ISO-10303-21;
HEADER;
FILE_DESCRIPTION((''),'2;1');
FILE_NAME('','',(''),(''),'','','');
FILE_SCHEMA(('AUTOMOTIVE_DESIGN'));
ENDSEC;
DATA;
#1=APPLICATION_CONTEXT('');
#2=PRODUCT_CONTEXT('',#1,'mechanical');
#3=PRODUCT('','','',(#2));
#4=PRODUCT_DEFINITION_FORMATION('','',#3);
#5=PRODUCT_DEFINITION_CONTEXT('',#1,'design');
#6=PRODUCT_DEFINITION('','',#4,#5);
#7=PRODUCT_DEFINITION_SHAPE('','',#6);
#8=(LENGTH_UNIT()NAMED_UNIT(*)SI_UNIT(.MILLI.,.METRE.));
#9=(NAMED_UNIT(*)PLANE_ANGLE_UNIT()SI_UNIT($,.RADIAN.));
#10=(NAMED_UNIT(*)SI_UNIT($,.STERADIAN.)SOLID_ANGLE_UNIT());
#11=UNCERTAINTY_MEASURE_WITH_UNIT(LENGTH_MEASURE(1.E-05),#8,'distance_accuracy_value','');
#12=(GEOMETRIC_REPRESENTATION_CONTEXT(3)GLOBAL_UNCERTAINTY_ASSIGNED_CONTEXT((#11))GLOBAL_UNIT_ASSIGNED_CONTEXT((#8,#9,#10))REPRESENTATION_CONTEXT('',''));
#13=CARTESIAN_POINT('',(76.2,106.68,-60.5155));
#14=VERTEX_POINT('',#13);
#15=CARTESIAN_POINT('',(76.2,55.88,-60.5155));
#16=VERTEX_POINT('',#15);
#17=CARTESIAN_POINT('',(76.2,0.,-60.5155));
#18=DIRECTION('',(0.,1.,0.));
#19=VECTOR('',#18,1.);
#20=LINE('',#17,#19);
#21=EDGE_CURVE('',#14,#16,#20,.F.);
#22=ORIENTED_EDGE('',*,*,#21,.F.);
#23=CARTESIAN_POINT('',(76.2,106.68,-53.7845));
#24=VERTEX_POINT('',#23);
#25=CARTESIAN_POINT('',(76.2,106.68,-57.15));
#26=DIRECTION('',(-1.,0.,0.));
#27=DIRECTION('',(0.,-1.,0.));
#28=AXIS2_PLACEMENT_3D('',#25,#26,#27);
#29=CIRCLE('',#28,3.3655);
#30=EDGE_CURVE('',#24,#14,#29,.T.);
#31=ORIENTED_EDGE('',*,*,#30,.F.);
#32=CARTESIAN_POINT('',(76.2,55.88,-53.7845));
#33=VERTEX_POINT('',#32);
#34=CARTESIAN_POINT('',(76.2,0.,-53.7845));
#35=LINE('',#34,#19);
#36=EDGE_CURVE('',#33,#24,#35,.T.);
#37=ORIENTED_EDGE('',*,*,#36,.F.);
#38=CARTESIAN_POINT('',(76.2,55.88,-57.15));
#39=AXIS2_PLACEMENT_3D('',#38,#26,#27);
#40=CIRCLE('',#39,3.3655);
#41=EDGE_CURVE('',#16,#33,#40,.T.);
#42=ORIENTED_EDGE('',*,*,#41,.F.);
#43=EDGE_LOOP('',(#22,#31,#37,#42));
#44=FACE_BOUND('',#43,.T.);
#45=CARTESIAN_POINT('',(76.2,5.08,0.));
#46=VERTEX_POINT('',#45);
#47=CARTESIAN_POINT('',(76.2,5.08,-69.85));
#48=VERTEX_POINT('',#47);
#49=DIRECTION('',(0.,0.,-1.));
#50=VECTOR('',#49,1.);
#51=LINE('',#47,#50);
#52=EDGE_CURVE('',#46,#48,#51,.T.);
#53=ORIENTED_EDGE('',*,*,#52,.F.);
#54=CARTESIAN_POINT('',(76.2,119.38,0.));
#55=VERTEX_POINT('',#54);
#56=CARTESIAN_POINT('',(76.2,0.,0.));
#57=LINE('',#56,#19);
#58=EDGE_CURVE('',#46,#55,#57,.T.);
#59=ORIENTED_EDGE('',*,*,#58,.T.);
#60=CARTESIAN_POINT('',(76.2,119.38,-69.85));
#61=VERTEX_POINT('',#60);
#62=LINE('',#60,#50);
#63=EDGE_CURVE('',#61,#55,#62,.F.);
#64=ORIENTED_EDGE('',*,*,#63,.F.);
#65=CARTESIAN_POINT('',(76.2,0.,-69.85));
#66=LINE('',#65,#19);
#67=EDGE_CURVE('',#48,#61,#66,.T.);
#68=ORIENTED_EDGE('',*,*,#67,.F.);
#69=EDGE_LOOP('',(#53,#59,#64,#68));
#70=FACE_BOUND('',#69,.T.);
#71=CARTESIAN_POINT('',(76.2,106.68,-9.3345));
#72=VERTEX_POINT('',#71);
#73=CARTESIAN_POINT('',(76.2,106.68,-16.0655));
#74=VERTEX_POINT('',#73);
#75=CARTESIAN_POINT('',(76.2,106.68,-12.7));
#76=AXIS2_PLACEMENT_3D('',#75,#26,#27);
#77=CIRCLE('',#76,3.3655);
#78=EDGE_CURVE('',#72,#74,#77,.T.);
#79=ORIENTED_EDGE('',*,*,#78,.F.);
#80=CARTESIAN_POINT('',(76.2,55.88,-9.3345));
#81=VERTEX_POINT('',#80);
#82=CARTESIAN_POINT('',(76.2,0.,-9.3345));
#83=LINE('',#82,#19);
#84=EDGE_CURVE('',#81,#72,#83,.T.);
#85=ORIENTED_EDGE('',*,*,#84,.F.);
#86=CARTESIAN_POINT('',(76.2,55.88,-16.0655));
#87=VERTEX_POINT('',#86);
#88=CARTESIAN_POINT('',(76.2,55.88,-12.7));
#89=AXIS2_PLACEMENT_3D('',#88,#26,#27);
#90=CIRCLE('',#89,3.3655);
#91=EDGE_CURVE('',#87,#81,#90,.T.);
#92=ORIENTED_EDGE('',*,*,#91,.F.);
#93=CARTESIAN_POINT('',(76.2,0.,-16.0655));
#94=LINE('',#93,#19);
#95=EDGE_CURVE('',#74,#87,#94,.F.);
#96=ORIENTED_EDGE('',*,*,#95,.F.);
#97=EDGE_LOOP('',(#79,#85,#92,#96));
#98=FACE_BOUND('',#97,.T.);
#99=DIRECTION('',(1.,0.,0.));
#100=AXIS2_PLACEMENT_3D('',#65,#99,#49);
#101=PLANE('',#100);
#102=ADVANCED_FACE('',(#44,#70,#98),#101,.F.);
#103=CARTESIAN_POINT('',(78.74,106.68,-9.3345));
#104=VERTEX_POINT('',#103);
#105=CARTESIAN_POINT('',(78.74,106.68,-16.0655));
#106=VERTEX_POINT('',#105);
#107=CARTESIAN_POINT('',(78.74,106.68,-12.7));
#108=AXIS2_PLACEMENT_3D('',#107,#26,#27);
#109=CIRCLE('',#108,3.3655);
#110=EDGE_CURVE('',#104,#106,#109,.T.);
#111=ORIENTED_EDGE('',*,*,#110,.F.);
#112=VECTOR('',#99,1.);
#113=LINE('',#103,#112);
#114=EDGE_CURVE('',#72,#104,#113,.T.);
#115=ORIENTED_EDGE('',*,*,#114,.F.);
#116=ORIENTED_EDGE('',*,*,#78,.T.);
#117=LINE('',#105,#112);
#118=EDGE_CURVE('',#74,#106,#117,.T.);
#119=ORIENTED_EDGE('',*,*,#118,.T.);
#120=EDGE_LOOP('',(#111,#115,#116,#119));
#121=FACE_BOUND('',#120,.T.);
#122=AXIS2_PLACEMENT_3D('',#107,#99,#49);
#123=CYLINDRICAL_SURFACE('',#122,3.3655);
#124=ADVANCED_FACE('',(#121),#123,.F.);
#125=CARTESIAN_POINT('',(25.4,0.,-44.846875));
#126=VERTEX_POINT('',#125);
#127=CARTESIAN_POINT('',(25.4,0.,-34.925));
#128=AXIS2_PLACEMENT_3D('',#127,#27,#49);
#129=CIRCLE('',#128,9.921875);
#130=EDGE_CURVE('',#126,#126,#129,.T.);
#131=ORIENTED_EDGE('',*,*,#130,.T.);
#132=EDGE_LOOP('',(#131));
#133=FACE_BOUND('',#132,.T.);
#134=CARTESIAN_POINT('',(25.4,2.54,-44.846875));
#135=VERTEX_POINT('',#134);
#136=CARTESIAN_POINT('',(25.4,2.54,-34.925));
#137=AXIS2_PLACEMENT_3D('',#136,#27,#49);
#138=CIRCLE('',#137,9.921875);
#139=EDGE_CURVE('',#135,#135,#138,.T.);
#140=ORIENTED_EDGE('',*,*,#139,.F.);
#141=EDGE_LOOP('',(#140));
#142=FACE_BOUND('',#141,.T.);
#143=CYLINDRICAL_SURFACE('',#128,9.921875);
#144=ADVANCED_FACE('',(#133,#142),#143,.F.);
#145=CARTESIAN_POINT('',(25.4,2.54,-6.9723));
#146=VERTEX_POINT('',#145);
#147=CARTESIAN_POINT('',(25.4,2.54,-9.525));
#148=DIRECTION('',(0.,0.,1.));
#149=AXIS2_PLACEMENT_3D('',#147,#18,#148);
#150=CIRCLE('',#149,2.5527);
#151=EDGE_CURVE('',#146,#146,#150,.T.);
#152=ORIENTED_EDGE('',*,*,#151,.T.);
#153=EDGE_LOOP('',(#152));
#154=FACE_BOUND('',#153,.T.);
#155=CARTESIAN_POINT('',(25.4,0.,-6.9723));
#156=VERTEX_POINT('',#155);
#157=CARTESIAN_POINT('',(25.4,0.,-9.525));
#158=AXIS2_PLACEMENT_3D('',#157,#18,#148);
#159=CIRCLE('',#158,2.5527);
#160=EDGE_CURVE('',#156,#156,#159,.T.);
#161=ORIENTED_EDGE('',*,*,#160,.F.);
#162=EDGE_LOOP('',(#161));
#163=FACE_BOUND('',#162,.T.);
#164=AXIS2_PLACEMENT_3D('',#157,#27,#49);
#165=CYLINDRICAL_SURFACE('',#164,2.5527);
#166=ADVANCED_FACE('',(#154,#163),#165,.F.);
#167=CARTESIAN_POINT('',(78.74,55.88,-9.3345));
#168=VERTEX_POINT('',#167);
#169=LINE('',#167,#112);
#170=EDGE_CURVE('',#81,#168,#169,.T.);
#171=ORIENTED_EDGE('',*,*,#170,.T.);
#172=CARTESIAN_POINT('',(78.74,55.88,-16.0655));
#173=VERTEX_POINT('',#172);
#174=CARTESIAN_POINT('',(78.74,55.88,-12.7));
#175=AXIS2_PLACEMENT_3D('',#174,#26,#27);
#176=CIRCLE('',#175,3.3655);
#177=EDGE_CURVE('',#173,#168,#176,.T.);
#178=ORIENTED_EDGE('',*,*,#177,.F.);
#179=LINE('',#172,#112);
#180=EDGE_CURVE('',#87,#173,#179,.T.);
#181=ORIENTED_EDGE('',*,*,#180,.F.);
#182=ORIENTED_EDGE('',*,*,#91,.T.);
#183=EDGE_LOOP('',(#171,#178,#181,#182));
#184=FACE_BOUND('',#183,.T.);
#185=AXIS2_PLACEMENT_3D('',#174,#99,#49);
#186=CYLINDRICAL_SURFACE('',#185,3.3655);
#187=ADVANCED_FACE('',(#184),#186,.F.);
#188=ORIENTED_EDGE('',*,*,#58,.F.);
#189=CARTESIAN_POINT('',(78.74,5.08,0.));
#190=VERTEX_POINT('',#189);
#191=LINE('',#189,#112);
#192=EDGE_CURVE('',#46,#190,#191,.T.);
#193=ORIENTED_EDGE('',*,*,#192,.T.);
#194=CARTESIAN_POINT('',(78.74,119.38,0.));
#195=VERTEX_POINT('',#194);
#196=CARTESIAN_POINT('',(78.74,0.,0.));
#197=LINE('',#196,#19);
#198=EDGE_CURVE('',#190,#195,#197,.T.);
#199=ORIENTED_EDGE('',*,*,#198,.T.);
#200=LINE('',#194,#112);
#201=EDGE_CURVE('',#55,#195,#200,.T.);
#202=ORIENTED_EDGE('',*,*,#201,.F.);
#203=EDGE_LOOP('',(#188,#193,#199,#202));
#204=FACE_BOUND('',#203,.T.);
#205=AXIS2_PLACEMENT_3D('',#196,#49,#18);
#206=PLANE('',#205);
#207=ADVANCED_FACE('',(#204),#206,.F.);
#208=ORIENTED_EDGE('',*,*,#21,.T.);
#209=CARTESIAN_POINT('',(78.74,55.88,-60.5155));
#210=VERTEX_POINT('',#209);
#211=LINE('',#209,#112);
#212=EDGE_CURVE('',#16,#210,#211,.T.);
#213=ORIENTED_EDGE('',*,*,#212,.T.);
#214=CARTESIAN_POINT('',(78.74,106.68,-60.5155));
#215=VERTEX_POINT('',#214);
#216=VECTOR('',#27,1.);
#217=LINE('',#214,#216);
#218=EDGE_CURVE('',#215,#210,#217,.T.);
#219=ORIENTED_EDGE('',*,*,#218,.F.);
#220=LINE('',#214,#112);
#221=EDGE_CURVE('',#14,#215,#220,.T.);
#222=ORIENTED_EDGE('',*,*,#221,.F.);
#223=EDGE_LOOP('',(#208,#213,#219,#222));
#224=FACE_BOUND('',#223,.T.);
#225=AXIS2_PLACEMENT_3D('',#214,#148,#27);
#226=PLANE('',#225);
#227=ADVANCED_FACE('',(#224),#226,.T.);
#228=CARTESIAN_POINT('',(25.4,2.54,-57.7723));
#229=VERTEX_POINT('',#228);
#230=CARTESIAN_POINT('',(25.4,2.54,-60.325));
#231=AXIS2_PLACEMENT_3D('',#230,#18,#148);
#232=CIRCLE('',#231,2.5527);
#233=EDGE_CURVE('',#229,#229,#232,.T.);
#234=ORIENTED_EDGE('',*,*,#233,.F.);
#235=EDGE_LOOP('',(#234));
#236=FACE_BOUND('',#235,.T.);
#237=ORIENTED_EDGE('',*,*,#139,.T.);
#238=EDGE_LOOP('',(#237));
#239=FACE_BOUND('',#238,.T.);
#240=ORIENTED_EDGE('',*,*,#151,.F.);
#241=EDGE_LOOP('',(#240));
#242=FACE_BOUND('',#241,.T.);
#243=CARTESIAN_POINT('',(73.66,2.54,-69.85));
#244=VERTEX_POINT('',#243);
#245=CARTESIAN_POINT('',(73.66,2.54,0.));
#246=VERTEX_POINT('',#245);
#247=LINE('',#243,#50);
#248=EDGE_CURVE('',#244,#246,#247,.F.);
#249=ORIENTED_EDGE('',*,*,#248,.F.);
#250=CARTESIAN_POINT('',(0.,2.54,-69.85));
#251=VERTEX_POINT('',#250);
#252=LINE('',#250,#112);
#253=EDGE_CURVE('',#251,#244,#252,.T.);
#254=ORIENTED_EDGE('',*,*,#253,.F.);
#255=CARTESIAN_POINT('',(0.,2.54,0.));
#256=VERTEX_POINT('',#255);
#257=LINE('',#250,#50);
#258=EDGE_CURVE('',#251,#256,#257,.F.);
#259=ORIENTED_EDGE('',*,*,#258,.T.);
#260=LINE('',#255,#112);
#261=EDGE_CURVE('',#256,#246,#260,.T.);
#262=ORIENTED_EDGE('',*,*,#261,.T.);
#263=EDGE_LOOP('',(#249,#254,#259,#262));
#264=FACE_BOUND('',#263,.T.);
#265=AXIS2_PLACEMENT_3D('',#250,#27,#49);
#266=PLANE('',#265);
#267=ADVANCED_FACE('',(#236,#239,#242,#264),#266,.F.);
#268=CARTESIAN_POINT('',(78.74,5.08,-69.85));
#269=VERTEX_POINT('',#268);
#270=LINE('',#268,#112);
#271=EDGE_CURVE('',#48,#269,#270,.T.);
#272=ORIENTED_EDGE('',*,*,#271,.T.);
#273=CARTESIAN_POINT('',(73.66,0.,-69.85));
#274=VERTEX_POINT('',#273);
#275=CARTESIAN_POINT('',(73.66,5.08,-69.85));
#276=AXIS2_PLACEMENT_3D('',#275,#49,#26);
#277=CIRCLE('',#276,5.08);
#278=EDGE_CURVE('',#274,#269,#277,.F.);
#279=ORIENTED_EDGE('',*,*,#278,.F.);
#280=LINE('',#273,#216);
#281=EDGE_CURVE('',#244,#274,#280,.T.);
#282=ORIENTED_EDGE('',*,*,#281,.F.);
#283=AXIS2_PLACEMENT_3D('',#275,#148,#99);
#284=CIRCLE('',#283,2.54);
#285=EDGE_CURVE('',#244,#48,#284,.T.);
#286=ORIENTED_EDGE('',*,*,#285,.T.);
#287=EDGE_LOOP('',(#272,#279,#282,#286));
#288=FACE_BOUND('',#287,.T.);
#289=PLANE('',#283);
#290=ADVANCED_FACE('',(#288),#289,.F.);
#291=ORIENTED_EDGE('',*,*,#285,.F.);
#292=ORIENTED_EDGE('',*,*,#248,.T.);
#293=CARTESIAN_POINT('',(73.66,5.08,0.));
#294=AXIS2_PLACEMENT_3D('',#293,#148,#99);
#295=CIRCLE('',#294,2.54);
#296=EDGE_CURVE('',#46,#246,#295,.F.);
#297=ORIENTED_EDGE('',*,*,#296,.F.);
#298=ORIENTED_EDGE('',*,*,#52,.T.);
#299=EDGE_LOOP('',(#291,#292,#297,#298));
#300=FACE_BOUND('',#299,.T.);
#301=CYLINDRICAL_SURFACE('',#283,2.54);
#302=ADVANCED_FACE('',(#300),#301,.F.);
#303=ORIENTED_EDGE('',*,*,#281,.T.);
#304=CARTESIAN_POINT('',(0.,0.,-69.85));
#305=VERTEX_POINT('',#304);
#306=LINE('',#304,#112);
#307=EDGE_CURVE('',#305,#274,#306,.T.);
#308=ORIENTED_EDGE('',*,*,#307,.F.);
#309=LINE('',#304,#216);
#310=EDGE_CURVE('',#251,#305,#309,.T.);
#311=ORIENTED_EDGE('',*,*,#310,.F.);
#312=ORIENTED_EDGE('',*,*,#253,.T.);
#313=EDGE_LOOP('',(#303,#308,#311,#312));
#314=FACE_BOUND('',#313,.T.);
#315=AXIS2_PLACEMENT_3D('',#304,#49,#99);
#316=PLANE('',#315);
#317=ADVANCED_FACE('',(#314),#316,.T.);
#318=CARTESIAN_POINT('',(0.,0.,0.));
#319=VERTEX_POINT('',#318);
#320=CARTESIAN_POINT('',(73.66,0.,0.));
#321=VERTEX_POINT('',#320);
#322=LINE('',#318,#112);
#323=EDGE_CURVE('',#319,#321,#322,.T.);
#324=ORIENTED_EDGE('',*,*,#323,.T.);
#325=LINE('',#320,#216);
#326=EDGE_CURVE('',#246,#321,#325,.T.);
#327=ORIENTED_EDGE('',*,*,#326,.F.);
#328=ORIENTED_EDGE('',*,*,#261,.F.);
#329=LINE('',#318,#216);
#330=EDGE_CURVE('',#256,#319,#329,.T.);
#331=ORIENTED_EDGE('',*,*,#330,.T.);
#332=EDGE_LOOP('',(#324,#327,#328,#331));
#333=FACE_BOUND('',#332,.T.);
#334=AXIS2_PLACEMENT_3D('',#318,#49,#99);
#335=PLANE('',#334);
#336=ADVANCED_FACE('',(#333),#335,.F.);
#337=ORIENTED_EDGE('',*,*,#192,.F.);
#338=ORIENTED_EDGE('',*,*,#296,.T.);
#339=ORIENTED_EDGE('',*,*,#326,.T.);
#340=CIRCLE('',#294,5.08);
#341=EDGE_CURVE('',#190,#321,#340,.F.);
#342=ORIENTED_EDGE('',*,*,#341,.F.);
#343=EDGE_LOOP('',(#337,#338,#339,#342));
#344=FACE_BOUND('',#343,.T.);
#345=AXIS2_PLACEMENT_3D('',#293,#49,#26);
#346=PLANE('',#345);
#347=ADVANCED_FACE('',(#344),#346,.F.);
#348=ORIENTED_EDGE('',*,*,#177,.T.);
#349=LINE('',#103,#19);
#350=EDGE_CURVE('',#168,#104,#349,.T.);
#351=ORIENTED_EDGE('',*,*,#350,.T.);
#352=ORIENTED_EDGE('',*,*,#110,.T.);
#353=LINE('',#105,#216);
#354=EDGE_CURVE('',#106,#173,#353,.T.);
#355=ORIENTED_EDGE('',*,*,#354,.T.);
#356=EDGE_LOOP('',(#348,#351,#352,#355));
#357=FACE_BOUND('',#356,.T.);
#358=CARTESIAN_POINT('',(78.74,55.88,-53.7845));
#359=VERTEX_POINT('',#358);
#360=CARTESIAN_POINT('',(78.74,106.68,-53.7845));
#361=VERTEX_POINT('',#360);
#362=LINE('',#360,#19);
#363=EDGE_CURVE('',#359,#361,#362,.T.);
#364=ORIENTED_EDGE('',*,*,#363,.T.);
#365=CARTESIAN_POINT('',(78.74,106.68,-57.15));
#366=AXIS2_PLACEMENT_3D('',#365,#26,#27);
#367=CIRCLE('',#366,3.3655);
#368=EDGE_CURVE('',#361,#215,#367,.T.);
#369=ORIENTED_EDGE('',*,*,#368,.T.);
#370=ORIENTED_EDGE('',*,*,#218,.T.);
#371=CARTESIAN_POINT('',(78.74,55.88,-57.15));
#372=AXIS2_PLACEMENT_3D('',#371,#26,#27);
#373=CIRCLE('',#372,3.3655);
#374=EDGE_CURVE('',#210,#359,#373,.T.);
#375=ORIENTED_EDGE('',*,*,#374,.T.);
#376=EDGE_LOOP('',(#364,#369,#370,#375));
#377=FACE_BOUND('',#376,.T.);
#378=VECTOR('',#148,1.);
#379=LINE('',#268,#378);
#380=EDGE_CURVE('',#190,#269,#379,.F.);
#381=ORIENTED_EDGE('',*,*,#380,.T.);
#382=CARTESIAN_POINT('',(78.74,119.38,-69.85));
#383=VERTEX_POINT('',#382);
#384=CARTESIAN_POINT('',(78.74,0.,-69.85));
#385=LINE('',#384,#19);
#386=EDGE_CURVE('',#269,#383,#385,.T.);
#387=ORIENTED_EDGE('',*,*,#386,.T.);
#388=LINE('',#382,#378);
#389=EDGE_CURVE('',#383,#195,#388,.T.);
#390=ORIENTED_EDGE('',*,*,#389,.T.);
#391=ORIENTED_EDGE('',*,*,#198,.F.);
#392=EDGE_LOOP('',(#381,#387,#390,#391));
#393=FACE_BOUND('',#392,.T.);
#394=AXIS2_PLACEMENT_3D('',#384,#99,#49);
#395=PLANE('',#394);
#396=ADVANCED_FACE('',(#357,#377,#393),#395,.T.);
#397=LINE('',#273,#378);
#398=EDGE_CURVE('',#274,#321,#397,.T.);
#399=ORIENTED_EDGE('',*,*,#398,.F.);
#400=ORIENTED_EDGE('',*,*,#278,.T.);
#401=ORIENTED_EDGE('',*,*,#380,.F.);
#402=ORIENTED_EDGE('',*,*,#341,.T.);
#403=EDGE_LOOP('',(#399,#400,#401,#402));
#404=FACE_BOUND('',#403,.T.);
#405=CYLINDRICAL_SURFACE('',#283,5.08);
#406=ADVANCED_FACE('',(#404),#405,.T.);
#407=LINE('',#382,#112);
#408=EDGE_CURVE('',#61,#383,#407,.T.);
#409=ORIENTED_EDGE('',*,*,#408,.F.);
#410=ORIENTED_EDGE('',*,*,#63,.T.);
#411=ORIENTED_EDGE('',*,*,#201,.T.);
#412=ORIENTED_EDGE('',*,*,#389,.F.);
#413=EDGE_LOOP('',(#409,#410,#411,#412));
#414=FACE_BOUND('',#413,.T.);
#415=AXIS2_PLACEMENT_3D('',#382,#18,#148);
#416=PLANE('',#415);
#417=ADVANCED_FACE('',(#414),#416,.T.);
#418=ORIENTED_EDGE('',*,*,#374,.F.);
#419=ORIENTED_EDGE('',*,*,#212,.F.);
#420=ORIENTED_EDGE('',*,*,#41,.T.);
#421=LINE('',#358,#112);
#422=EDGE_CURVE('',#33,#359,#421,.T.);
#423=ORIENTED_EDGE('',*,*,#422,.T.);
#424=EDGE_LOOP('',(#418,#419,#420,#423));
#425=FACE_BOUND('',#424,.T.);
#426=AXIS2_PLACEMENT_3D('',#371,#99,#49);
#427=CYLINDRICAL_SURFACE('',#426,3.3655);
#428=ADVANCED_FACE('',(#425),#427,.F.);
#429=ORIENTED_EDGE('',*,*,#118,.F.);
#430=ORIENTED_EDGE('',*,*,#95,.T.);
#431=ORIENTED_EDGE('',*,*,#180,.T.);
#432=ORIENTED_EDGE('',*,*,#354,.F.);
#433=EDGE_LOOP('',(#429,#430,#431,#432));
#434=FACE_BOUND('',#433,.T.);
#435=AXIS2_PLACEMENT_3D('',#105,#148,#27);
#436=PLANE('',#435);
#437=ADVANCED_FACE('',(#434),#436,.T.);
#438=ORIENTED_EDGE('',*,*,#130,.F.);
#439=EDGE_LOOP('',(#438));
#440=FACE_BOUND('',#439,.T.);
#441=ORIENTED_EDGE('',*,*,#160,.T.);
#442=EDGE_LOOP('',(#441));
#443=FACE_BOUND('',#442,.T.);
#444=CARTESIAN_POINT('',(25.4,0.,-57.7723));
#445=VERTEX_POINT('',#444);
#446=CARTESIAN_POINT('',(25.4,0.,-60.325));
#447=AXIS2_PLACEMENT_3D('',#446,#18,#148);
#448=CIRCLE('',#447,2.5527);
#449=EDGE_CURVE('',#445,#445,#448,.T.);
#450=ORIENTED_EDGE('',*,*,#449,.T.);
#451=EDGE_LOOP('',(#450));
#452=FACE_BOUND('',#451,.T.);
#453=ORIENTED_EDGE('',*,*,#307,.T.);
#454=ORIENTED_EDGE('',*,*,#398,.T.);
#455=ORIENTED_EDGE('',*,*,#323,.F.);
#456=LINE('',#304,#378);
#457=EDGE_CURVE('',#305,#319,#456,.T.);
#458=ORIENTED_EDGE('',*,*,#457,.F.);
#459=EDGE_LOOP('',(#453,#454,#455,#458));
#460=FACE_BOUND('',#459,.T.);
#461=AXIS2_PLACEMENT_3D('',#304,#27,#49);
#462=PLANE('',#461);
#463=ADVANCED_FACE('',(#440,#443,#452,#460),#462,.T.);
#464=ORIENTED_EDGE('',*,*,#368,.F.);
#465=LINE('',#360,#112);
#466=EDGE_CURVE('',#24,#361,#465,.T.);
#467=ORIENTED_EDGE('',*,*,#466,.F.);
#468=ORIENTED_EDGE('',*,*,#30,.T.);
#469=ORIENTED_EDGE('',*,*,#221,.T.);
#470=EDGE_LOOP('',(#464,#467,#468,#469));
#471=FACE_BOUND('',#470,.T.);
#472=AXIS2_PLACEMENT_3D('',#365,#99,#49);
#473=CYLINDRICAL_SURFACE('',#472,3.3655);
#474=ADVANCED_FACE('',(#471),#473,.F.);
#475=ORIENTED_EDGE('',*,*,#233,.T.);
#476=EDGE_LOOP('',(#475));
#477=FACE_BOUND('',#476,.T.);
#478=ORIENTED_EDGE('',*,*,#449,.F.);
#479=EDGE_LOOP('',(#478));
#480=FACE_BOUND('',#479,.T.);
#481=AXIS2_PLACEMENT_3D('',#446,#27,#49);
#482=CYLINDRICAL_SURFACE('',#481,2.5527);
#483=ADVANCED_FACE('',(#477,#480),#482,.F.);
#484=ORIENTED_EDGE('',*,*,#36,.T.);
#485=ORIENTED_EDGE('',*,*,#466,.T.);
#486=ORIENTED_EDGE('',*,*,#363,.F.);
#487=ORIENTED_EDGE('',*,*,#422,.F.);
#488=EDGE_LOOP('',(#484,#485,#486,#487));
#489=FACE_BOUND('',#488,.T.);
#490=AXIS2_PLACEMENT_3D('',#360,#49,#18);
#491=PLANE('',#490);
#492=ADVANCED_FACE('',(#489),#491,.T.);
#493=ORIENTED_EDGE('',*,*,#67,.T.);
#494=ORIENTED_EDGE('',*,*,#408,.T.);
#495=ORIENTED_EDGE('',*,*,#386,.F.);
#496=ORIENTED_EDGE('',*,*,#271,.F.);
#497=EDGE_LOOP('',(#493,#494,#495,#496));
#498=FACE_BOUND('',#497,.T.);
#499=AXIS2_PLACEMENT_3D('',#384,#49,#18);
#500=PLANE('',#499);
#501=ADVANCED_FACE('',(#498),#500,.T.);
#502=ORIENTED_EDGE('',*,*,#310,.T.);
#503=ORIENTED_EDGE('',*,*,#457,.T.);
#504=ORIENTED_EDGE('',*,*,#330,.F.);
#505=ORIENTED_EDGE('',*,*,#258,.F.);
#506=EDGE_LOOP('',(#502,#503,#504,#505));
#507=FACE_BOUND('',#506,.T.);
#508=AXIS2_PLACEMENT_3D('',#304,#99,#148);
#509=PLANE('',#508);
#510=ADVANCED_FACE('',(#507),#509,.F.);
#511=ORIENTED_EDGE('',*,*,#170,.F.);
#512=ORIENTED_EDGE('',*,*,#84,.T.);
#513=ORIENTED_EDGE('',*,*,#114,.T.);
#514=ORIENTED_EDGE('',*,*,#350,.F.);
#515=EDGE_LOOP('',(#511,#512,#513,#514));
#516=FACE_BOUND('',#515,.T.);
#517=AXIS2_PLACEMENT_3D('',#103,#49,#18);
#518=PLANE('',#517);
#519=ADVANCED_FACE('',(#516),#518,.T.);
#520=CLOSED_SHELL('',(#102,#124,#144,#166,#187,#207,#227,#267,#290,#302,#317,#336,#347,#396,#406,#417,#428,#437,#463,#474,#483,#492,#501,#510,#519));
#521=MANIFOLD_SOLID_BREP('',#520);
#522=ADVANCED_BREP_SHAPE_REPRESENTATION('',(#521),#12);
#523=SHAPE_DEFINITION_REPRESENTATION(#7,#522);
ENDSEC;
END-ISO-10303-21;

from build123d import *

# Parameters (mm, degrees)
BOSS_EXTRUDE2_DEPTH                  = 69.85
F_10_CLEARANCE_HOLE1_D               = 5.1054
CUT_EXTRUDE1_DEPTH                   = 158.914682345
F_25_32_0_78125_DIAMETER_HOLE1_D     = 19.84375
F_25_32_0_78125_DIAMETER_HOLE1_DEPTH = 9.278336046
F_25_32_0_78125_DIAMETER_HOLE1_TIP   = 5.961663954
CONVERT_SOLID1_START                 = -69.85
CONVERT_SOLID1_DEPTH                 = 69.85
CONVERT_SOLID1_2_DEPTH               = 69.85


# Read off the part's stored shape, not the designer's step: Convert-Solid1
with BuildPart() as part:
    # Sketch8 → Boss-Extrude2 (new body)
    with BuildSketch(Plane.XY):
        Polygon((0, 2.54), (0, 0), (78.74, 0), (78.74, 119.38), (76.2, 119.38), (76.2, 2.54), align=None)
    extrude(amount=-BOSS_EXTRUDE2_DEPTH)

    # #10 Clearance Hole1 (through all)
    with Locations(Plane(origin=(0, 2.54, 0), x_dir=(1, 0, 0), z_dir=(0, 1, 0))):
        with Locations((25.4, 9.525), (25.4, 60.325)):
            Hole(F_10_CLEARANCE_HOLE1_D / 2)

    # E → Cut-Extrude1 (cut, through all)
    with BuildSketch(Plane.ZY.offset(-76.2)):
        with BuildLine():
            Line((-53.7845, 106.68), (-53.7845, 55.88))
            ThreePointArc((-53.7845, 55.88), (-57.15, 52.5145), (-60.5155, 55.88))
            Line((-60.5155, 55.88), (-60.5155, 106.68))
            ThreePointArc((-60.5155, 106.68), (-57.15, 110.0455), (-53.7845, 106.68))
        make_face()
        with BuildLine():
            Line((-9.3345, 106.68), (-9.3345, 55.88))
            ThreePointArc((-9.3345, 55.88), (-12.7, 52.5145), (-16.0655, 55.88))
            Line((-16.0655, 55.88), (-16.0655, 106.68))
            ThreePointArc((-16.0655, 106.68), (-12.7, 110.0455), (-9.3345, 106.68))
        make_face()
    extrude(amount=-CUT_EXTRUDE1_DEPTH, mode=Mode.SUBTRACT)

    # 25/32 (0.78125) Diameter Hole1
    with Locations(Plane(origin=(0, 2.54, 0), x_dir=(1, 0, 0), z_dir=(0, 1, 0))):
        with Locations((25.4, 34.925)):
            Hole(F_25_32_0_78125_DIAMETER_HOLE1_D / 2, depth=F_25_32_0_78125_DIAMETER_HOLE1_DEPTH)
            with Locations((0, 0, -(F_25_32_0_78125_DIAMETER_HOLE1_DEPTH + F_25_32_0_78125_DIAMETER_HOLE1_TIP / 2))):  # 118° drill point
                Cone(0, F_25_32_0_78125_DIAMETER_HOLE1_D / 2, F_25_32_0_78125_DIAMETER_HOLE1_TIP, mode=Mode.SUBTRACT)

    # Convert-Solid1 outline → Convert-Solid1 (cut)
    with BuildSketch(Plane.XY.offset(CONVERT_SOLID1_START)):
        with BuildLine():
            ThreePointArc((78.74, 5.08), (77.252102448, 1.487897552), (73.66, 0))
            Line((73.66, 0), (78.74, 0))
            Line((78.74, 0), (78.74, 5.08))
        make_face()
    extrude(amount=CONVERT_SOLID1_DEPTH, mode=Mode.SUBTRACT)

    # Convert-Solid1 2 outline → Convert-Solid1 2 (add)
    with BuildSketch(Plane.XY.offset(CONVERT_SOLID1_START)):
        with BuildLine():
            ThreePointArc((76.2, 5.08), (75.456051224, 3.283948776), (73.66, 2.54))
            Line((73.66, 2.54), (76.2, 2.54))
            Line((76.2, 2.54), (76.2, 5.08))
        make_face()
    extrude(amount=CONVERT_SOLID1_2_DEPTH)


solid = part.part
